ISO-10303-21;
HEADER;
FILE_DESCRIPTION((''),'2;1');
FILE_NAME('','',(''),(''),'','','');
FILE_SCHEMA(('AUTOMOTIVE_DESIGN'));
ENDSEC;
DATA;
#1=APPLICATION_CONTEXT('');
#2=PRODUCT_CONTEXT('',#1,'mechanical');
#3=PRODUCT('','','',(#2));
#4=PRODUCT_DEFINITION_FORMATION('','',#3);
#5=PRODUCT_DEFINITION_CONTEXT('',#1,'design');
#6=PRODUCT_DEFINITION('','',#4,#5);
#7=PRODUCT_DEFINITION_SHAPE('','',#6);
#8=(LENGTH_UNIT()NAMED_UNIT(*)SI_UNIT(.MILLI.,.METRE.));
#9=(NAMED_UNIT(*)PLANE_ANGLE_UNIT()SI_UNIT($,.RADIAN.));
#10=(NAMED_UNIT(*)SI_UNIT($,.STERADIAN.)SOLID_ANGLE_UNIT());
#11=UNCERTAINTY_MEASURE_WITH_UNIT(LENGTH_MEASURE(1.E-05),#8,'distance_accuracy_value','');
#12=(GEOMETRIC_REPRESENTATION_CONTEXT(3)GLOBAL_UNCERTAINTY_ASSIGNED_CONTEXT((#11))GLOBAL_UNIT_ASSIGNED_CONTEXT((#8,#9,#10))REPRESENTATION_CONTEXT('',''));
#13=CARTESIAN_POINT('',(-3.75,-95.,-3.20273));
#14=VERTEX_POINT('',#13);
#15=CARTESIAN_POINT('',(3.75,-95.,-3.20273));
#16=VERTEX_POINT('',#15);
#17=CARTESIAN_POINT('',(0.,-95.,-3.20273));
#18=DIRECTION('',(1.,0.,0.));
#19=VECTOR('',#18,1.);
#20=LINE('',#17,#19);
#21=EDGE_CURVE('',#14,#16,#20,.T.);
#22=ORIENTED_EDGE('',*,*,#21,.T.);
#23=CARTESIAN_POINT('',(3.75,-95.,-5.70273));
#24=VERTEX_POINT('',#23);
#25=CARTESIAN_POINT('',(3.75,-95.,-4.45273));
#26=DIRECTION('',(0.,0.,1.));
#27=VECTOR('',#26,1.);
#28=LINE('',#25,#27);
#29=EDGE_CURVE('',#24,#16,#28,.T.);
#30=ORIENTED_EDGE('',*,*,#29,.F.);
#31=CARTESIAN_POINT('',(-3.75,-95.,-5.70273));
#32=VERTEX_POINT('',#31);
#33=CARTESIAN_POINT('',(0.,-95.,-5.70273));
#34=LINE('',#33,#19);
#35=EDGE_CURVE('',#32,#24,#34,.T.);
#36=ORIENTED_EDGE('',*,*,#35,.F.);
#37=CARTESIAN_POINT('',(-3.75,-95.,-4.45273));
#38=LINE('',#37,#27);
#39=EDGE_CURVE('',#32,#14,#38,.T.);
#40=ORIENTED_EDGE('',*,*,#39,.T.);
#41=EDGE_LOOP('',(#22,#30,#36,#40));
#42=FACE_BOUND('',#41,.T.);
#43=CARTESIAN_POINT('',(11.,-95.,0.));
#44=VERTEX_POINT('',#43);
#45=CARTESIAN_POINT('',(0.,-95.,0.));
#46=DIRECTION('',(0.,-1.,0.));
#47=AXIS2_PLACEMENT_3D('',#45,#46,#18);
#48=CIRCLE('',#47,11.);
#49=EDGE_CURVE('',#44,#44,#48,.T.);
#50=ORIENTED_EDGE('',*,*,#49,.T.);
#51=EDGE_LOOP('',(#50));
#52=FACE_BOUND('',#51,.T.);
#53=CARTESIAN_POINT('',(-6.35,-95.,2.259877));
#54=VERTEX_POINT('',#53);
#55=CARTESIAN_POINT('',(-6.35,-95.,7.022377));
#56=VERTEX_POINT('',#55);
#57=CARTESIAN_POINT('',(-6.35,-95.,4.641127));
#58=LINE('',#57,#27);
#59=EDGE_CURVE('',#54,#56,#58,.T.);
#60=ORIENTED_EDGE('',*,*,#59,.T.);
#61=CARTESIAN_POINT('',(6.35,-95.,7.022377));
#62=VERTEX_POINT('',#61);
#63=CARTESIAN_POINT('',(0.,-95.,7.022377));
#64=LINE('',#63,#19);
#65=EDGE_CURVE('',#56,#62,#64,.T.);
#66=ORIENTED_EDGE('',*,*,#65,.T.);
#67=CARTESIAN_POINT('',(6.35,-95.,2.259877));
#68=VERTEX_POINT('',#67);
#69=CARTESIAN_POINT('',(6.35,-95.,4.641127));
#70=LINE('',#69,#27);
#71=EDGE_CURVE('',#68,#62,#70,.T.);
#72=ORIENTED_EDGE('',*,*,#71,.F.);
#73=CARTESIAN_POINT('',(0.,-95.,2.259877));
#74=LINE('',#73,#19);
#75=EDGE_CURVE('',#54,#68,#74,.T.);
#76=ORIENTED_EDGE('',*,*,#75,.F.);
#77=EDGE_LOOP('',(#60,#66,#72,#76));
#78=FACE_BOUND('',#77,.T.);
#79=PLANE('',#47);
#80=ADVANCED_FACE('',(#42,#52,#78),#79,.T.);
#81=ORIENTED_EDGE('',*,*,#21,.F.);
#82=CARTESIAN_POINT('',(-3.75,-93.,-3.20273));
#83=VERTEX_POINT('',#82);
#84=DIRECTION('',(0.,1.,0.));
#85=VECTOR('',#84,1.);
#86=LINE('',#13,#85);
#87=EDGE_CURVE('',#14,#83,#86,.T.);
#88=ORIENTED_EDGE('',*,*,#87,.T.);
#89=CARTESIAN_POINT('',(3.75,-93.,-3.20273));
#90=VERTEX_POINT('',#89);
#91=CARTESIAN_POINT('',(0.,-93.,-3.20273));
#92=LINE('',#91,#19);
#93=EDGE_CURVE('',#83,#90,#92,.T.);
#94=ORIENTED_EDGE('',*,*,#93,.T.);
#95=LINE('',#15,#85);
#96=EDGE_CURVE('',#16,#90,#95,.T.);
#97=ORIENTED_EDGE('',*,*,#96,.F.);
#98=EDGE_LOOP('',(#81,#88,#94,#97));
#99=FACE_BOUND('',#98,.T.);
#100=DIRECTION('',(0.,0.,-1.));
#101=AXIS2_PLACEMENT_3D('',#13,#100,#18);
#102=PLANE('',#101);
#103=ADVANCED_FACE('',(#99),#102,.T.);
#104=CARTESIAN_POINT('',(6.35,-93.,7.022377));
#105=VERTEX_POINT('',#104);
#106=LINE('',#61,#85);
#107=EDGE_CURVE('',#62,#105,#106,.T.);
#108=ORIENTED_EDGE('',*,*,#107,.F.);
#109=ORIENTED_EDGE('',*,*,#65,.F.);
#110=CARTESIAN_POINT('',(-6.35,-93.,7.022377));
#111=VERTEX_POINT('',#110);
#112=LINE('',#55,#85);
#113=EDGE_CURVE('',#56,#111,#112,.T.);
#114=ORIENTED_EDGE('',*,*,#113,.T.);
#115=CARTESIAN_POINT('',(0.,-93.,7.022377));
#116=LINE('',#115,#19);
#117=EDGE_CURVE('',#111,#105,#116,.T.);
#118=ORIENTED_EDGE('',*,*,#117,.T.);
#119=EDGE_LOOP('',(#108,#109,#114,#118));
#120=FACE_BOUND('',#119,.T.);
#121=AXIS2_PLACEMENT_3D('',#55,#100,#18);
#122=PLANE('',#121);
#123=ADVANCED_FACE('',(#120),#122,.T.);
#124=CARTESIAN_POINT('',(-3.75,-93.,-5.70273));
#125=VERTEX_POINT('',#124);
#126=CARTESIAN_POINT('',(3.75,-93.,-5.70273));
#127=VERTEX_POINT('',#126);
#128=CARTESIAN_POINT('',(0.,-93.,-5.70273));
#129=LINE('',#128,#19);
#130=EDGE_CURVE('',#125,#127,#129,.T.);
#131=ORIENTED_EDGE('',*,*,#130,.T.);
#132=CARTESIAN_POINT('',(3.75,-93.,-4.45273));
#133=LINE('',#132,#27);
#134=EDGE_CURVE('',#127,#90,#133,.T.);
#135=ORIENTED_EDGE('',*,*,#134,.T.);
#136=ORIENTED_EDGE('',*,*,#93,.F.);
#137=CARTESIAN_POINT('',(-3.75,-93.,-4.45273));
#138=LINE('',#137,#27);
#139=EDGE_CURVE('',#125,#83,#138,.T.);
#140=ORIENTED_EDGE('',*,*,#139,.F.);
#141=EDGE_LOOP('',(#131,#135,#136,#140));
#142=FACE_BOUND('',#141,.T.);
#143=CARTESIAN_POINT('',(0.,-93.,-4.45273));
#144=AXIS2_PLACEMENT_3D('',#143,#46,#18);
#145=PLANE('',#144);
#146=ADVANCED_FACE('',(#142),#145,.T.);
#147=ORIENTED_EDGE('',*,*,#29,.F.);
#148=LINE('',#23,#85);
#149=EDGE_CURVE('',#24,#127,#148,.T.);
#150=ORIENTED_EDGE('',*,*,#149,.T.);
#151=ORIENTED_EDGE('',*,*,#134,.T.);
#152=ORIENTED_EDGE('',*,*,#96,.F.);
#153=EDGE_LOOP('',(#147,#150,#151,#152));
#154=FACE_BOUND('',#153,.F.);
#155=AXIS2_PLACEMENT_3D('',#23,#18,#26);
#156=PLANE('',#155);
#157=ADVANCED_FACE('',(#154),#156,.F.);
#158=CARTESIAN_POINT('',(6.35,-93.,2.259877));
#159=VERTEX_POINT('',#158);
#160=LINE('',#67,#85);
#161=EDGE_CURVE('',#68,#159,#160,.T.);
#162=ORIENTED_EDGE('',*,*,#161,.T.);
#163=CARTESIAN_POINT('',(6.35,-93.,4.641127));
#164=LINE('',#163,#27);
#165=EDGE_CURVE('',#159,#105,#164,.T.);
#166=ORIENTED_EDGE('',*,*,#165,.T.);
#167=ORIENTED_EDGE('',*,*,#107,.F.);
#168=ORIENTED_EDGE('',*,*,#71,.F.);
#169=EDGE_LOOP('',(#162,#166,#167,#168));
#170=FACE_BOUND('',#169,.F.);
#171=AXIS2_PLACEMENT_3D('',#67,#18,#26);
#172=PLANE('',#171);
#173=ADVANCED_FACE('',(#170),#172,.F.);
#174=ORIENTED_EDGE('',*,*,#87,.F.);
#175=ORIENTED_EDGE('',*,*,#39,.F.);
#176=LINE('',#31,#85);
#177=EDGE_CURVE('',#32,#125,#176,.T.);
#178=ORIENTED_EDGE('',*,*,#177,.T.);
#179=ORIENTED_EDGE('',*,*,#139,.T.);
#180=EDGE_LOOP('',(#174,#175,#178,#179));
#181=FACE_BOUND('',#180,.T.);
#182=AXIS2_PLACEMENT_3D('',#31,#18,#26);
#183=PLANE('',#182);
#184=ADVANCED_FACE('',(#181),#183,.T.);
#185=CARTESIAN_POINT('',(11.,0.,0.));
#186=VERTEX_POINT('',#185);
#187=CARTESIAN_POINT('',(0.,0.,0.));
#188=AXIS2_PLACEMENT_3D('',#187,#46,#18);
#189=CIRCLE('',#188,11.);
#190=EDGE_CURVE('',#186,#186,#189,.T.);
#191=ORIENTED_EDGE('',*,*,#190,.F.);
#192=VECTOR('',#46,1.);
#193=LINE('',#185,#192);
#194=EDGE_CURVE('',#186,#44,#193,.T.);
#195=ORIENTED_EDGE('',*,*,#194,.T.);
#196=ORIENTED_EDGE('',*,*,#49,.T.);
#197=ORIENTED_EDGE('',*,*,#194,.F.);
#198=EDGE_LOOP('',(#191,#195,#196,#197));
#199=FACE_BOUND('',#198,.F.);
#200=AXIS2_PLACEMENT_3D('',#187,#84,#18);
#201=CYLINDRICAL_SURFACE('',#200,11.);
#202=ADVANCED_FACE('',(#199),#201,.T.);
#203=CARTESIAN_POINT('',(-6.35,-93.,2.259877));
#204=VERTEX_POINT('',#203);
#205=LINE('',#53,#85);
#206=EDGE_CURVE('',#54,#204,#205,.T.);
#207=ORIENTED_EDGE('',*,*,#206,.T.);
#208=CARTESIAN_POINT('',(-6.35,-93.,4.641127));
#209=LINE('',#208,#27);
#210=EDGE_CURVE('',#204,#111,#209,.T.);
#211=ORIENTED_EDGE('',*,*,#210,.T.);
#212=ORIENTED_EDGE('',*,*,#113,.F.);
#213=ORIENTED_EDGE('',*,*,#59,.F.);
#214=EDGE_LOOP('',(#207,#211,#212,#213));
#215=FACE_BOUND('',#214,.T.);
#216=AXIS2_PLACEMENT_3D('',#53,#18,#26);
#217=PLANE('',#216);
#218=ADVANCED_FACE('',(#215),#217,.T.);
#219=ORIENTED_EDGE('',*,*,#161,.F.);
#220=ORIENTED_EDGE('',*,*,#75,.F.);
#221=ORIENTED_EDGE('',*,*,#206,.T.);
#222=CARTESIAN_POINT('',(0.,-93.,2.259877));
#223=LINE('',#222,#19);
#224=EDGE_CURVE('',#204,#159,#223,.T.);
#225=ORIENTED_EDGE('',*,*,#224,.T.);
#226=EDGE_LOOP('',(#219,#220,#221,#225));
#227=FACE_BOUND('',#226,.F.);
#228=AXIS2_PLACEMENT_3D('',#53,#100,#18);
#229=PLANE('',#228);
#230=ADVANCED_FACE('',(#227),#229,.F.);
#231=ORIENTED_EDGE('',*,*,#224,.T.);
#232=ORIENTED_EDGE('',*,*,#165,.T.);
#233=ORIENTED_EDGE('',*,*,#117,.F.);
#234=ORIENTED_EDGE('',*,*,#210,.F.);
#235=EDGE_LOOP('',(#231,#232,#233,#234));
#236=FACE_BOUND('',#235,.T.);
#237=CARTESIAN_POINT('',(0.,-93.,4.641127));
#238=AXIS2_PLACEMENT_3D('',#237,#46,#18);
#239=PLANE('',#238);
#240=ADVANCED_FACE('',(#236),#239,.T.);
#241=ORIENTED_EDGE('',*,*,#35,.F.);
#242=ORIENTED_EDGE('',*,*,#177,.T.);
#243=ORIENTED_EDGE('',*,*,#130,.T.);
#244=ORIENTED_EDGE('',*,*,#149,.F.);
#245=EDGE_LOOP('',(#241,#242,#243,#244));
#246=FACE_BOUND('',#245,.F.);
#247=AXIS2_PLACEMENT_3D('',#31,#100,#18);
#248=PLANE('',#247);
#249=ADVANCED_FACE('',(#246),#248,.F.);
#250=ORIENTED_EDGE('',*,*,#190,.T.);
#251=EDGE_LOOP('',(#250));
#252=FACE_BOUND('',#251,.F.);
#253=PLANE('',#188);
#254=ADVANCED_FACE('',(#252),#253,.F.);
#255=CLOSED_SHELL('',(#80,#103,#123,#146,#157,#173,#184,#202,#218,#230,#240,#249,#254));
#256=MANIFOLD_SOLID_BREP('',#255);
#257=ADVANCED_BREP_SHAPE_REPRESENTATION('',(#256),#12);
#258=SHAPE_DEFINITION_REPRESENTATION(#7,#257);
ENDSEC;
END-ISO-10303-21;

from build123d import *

# Parameters (mm, degrees)
F0_R     = 11
F1_DEPTH = 95
F2_W     = 12.7
F2_H     = 4.7625
F2_W_2   = 7.5
F2_H_2   = 2.5
F3_DEPTH = 2


# Not quite as in the source:
# - a feature names something its author has since deleted; it is built from what else it names


with BuildPart() as f1:
    # F0 (on Front) → F1 (new body)
    with BuildSketch(Plane.XZ):
        Circle(F0_R)
    extrude(amount=F1_DEPTH)

    # F2 (on face) → F3 (cut)
    with BuildSketch(Plane.XZ.offset(95)):
        with Locations((0, 4.6411268625)):
            Rectangle(F2_W, F2_H)
        with Locations((0, -4.4527297777)):
            Rectangle(F2_W_2, F2_H_2)
    extrude(amount=-F3_DEPTH, mode=Mode.SUBTRACT)


solid = f1.part
